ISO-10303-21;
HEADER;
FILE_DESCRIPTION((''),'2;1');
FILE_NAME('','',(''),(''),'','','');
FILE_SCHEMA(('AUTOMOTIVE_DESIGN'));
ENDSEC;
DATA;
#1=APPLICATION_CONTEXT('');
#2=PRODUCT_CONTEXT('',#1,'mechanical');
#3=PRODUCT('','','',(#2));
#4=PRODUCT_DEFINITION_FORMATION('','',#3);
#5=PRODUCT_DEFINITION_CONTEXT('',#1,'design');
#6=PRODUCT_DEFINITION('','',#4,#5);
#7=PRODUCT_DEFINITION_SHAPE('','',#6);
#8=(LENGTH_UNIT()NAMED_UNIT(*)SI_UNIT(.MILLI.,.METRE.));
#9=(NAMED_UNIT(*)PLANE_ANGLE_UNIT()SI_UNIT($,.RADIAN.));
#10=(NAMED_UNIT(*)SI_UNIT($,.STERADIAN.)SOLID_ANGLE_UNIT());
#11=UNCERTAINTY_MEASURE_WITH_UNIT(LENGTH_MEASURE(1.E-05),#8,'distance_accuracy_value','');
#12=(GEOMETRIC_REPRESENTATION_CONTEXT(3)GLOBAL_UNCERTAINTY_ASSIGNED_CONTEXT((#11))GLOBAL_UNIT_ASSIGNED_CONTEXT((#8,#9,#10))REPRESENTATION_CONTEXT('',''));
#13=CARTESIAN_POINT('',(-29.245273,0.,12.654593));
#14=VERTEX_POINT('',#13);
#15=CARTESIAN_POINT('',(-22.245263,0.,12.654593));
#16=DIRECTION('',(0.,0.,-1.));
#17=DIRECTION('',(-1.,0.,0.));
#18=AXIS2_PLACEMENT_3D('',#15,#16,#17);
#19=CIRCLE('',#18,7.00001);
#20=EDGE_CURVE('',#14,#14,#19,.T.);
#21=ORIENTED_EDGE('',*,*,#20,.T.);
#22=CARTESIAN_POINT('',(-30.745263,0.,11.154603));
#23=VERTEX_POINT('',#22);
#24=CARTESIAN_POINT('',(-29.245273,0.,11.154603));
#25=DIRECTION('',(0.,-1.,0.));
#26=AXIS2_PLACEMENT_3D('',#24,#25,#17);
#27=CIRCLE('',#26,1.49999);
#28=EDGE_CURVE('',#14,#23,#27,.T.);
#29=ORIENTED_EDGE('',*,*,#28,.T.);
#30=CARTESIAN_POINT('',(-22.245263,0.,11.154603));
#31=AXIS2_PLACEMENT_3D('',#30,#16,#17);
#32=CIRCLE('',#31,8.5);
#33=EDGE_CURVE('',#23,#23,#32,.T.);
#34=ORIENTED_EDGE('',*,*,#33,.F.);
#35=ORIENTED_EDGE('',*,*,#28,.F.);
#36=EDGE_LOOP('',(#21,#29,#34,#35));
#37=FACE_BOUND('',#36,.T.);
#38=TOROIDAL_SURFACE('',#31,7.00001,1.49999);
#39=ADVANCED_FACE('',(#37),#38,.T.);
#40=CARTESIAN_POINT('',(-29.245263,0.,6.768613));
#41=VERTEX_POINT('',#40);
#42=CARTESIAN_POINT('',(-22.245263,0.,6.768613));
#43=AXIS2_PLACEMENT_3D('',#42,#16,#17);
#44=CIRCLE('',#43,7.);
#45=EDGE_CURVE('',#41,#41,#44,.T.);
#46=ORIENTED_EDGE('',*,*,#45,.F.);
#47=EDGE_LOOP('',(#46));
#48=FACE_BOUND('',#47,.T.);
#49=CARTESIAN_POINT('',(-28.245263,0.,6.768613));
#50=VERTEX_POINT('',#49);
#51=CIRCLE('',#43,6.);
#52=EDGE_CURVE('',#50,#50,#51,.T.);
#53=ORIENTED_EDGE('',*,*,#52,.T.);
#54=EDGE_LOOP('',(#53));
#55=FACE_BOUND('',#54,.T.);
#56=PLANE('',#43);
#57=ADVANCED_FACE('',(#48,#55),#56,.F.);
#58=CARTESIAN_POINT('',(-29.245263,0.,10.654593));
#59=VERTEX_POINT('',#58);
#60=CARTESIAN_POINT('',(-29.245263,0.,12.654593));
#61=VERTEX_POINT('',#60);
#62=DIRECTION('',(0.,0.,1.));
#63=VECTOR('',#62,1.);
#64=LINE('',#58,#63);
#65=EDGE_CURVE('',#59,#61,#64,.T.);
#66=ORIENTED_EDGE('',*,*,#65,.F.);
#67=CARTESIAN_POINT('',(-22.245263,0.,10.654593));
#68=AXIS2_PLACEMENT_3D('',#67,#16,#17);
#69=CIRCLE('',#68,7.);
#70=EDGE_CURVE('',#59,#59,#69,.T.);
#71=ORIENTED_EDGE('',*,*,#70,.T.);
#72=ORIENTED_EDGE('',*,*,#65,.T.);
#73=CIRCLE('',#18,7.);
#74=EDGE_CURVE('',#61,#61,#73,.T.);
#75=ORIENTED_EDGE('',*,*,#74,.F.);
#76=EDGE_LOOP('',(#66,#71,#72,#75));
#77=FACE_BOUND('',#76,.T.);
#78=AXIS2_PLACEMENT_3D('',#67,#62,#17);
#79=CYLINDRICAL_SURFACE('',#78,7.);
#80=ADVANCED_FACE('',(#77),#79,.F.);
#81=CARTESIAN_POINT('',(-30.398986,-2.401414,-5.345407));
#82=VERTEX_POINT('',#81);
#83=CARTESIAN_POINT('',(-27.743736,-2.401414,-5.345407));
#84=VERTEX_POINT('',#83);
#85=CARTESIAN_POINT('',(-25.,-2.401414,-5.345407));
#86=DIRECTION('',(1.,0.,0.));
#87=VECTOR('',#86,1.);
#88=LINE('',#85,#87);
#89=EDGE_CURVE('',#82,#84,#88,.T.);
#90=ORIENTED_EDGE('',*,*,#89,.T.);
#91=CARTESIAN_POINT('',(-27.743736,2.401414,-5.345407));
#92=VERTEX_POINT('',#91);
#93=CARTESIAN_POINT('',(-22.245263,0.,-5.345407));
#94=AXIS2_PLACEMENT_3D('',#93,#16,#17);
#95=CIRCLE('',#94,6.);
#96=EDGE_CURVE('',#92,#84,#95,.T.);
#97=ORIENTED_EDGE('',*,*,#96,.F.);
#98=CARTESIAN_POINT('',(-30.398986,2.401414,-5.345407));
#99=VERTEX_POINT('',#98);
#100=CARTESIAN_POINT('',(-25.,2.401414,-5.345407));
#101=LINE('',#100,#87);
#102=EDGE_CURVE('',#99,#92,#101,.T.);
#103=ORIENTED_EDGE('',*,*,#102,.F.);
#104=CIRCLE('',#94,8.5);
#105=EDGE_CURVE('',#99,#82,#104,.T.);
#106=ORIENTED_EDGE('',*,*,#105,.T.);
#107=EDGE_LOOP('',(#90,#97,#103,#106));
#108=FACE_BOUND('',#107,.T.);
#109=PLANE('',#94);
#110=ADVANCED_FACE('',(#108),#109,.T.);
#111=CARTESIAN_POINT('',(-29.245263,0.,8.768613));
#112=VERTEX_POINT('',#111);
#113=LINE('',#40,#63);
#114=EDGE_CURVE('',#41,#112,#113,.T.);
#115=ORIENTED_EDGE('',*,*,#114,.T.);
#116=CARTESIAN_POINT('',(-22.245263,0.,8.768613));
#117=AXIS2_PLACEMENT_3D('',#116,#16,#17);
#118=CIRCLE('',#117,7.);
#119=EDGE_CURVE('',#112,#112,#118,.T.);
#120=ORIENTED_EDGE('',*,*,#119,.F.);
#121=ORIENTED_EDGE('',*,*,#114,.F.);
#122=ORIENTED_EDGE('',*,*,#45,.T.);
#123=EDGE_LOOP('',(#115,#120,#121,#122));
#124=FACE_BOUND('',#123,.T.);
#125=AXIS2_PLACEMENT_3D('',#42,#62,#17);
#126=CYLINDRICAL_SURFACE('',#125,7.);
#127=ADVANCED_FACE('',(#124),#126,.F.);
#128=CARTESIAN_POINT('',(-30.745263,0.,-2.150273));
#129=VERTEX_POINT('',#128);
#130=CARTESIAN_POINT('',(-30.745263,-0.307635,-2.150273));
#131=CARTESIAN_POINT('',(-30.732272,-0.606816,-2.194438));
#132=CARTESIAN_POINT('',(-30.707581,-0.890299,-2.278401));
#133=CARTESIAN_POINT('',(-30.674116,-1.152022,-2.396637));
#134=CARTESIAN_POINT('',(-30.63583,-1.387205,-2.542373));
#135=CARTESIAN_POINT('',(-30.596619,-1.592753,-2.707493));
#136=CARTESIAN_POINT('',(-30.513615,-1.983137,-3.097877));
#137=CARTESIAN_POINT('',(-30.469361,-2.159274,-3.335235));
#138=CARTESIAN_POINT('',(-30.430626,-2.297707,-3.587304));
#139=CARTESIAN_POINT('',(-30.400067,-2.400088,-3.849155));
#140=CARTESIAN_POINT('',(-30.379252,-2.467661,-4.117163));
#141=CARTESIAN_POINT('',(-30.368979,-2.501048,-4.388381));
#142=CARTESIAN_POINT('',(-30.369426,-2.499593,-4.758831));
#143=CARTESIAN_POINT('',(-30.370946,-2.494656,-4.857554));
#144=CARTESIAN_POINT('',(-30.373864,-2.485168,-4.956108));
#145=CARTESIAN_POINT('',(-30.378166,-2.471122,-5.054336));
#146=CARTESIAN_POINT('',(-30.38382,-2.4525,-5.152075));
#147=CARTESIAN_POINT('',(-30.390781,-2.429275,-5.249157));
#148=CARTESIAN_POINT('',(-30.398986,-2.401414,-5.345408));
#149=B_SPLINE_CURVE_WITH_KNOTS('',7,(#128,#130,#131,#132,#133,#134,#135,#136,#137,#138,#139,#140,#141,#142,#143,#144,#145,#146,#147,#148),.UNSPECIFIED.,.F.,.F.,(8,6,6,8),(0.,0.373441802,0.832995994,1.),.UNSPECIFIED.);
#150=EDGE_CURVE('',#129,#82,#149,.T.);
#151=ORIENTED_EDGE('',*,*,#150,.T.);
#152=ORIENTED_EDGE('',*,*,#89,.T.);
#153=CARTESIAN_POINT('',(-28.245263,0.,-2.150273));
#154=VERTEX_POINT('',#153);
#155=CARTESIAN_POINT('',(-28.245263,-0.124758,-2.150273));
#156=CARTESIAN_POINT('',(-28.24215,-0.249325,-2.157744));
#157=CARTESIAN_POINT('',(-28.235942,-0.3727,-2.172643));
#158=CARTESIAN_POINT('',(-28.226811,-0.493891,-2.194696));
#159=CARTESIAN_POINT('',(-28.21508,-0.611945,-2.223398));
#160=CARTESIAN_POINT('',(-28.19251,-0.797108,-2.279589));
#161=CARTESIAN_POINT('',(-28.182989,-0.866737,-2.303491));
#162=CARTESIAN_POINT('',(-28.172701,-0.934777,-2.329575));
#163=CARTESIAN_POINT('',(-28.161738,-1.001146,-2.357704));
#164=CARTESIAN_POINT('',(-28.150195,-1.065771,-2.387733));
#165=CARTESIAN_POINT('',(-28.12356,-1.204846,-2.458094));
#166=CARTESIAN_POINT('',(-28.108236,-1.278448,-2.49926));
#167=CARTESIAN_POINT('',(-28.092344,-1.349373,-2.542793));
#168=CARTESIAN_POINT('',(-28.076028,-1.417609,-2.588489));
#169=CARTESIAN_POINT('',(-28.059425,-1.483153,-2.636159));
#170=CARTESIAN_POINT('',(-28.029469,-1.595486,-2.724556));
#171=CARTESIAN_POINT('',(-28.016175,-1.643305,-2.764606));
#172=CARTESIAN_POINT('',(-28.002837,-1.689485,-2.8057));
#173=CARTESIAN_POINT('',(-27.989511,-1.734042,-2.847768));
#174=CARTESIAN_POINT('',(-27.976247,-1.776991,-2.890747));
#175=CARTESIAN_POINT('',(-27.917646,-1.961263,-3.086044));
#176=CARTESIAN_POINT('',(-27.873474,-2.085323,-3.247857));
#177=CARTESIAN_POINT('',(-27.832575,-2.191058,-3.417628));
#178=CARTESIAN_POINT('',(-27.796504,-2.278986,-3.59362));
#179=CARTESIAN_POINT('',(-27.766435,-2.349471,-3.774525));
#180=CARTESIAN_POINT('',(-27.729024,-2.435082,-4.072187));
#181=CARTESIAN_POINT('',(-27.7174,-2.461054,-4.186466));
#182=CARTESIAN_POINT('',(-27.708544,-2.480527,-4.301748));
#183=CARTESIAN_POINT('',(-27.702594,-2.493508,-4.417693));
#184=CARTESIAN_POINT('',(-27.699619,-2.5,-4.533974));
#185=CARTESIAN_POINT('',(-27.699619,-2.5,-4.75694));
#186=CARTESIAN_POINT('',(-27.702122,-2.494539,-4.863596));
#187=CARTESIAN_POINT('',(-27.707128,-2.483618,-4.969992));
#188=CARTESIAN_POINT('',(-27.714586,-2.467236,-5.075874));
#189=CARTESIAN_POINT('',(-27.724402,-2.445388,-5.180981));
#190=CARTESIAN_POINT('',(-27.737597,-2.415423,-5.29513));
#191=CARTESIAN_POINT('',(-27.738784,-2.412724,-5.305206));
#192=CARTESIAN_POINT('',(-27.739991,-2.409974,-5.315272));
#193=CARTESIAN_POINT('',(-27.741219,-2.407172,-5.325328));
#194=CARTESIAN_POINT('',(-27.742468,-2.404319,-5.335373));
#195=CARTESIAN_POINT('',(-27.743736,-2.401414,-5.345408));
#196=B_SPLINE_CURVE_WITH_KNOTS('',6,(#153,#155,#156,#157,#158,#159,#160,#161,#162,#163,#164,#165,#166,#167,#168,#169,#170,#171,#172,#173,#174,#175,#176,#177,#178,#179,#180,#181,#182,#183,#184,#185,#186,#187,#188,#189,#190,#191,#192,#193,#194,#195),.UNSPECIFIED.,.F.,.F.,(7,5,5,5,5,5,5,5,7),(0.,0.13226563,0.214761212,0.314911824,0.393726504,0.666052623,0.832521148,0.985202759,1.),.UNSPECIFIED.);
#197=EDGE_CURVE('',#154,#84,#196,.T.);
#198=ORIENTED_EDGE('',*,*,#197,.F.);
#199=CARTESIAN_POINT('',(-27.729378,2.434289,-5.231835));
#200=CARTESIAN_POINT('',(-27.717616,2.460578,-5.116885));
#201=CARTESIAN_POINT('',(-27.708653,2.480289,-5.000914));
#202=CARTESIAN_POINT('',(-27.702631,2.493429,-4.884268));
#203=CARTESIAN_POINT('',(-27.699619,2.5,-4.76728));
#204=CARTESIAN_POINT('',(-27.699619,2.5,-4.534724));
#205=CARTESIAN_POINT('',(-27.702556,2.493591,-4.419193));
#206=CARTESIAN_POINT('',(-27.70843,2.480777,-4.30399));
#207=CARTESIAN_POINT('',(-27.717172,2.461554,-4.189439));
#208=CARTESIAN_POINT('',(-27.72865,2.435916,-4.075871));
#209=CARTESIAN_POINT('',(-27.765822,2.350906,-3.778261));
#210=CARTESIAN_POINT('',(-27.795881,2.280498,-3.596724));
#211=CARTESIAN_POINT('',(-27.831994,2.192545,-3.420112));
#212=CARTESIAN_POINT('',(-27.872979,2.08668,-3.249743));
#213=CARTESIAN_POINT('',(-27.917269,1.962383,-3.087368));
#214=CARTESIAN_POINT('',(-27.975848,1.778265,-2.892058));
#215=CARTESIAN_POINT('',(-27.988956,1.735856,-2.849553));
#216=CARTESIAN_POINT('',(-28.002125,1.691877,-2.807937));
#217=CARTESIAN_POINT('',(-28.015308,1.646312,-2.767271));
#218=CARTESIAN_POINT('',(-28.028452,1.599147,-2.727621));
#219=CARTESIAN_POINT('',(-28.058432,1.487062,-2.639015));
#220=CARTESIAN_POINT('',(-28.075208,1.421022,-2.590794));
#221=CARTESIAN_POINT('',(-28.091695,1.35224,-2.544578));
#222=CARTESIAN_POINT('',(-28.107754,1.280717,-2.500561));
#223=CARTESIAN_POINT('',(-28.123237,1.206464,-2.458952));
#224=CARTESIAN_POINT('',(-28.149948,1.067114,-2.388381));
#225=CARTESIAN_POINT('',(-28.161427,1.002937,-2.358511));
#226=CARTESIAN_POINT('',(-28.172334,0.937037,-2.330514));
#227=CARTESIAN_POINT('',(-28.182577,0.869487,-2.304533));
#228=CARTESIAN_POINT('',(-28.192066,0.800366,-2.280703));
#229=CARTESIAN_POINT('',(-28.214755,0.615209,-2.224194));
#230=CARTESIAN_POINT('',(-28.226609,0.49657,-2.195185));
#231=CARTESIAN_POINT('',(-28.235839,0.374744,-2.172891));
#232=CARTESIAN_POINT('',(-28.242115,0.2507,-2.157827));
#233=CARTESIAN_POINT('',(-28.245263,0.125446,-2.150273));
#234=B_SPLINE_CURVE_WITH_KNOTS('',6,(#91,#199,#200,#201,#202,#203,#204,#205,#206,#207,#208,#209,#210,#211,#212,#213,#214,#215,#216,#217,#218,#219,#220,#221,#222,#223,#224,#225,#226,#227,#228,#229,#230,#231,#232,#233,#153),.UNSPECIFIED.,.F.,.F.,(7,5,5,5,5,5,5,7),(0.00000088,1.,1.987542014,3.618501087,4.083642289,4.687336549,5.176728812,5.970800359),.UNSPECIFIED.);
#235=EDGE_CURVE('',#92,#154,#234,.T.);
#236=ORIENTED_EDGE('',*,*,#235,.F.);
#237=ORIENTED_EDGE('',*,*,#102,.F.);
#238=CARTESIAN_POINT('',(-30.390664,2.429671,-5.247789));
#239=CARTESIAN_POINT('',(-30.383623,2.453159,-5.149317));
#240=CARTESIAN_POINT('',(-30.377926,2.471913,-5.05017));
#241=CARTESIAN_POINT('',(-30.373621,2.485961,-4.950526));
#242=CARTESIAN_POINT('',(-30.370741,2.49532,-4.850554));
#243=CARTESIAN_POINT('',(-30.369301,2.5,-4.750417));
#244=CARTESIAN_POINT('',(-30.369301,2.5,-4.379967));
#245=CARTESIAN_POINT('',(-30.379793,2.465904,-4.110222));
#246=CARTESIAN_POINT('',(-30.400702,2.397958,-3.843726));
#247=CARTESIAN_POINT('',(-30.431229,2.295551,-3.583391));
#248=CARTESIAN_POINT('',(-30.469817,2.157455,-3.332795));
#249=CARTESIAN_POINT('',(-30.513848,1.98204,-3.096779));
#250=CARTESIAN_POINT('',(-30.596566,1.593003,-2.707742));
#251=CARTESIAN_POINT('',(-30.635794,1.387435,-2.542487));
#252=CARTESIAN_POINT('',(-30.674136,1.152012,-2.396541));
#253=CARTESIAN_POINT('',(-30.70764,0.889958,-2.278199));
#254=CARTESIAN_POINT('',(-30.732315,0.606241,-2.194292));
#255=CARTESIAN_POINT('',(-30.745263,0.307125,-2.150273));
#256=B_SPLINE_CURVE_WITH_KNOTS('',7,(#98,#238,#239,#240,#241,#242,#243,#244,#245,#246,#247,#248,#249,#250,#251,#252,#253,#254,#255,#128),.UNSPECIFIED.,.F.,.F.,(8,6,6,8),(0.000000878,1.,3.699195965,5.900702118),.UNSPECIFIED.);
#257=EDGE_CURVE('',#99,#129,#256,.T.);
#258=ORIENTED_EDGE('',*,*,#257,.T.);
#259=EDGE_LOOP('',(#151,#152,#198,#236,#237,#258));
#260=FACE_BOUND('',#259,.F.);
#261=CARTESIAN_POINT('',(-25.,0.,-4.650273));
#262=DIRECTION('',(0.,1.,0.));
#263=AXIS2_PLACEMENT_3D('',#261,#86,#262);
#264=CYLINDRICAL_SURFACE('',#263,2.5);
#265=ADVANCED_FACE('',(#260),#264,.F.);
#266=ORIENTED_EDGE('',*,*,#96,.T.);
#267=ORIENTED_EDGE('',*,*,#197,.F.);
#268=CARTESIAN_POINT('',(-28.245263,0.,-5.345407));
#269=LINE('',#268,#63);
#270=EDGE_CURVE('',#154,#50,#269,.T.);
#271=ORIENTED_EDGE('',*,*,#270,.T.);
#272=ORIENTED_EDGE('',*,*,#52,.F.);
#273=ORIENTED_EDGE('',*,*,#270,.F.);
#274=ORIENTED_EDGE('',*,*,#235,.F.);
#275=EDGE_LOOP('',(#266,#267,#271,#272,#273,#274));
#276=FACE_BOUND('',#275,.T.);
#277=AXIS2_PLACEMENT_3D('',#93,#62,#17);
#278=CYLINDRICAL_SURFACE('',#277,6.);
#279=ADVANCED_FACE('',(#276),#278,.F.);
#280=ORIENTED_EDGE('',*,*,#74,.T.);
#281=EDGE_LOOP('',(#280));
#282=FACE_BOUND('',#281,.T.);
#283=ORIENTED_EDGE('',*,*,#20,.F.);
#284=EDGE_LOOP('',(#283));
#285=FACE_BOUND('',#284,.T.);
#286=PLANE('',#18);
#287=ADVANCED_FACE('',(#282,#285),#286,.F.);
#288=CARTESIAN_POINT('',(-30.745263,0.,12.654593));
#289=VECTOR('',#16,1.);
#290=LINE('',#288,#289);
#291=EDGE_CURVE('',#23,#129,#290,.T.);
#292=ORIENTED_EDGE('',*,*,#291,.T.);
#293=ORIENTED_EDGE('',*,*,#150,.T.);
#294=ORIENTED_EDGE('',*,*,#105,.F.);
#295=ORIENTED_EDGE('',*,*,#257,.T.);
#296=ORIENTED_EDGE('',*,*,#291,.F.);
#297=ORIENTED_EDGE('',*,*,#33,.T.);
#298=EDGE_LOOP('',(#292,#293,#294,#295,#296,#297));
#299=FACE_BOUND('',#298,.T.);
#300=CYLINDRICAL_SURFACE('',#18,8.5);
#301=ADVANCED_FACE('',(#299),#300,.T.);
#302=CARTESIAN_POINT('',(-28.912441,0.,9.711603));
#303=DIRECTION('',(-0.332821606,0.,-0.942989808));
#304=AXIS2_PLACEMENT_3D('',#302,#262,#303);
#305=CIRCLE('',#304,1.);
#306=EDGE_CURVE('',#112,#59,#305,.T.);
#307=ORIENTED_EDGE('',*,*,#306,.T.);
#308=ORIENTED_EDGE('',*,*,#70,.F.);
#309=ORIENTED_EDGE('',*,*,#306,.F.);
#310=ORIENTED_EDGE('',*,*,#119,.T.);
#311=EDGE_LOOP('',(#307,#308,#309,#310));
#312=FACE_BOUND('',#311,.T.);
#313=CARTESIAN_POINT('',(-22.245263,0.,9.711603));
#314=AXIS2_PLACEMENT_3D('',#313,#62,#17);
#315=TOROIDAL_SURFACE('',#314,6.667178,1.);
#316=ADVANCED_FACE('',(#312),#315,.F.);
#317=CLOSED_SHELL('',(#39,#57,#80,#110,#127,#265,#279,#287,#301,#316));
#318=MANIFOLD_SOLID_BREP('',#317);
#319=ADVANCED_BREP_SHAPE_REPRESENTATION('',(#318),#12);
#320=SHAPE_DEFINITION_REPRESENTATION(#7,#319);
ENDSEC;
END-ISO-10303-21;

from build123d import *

# Parameters (mm, degrees)
F2_R     = 1.49999
F4_R     = 2.5
F5_DEPTH = 25


# Not quite as in the source:
# - a fillet or chamfer is up to 0.001 mm smaller than in the source, because OpenCascade refuses the exact size


with BuildPart() as f1:
    # F0 (on Front) → F1 (revolve)
    with BuildSketch(Plane.XZ):
        with BuildLine():
            Line((-29.2452627023, 12.6545929811), (-30.7452627023, 12.6545929811))
            Line((-30.7452627023, 12.6545929811), (-30.7452627023, -5.3454070189))
            Line((-30.7452627023, -5.3454070189), (-28.2452627023, -5.3454070189))
            Line((-28.2452627023, -5.3454070189), (-28.2452627023, 6.7686133647))
            Line((-28.2452627023, 6.7686133647), (-29.2452627023, 6.7686133647))
            Line((-29.2452627023, 6.7686133647), (-29.2452627023, 8.7686133647))
            ThreePointArc((-29.2452627023, 8.7686133647), (-29.9124410959, 9.7116031729), (-29.2452627023, 10.6545929811))
            Line((-29.2452627023, 10.6545929811), (-29.2452627023, 12.6545929811))
        make_face()
    revolve(axis=Axis((-22.2452627023, 0, 3.276667092), (0, 0, -1)))

    # F2 (radius 1.5 in the source; OpenCascade refuses exactly that, so slightly less here)
    f2_edges = [f1.edges().sort_by_distance(p)[0] for p in [
        (-13.745263, 0, 12.654593),
    ]]
    fillet(f2_edges, radius=F2_R)

    # F4 (on offset) → F5 (cut)
    with BuildSketch(Plane.YZ.offset(-25)):
        with Locations((0, -4.6502733603)):
            Circle(F4_R)
    extrude(amount=-F5_DEPTH, mode=Mode.SUBTRACT)


solid = f1.part
